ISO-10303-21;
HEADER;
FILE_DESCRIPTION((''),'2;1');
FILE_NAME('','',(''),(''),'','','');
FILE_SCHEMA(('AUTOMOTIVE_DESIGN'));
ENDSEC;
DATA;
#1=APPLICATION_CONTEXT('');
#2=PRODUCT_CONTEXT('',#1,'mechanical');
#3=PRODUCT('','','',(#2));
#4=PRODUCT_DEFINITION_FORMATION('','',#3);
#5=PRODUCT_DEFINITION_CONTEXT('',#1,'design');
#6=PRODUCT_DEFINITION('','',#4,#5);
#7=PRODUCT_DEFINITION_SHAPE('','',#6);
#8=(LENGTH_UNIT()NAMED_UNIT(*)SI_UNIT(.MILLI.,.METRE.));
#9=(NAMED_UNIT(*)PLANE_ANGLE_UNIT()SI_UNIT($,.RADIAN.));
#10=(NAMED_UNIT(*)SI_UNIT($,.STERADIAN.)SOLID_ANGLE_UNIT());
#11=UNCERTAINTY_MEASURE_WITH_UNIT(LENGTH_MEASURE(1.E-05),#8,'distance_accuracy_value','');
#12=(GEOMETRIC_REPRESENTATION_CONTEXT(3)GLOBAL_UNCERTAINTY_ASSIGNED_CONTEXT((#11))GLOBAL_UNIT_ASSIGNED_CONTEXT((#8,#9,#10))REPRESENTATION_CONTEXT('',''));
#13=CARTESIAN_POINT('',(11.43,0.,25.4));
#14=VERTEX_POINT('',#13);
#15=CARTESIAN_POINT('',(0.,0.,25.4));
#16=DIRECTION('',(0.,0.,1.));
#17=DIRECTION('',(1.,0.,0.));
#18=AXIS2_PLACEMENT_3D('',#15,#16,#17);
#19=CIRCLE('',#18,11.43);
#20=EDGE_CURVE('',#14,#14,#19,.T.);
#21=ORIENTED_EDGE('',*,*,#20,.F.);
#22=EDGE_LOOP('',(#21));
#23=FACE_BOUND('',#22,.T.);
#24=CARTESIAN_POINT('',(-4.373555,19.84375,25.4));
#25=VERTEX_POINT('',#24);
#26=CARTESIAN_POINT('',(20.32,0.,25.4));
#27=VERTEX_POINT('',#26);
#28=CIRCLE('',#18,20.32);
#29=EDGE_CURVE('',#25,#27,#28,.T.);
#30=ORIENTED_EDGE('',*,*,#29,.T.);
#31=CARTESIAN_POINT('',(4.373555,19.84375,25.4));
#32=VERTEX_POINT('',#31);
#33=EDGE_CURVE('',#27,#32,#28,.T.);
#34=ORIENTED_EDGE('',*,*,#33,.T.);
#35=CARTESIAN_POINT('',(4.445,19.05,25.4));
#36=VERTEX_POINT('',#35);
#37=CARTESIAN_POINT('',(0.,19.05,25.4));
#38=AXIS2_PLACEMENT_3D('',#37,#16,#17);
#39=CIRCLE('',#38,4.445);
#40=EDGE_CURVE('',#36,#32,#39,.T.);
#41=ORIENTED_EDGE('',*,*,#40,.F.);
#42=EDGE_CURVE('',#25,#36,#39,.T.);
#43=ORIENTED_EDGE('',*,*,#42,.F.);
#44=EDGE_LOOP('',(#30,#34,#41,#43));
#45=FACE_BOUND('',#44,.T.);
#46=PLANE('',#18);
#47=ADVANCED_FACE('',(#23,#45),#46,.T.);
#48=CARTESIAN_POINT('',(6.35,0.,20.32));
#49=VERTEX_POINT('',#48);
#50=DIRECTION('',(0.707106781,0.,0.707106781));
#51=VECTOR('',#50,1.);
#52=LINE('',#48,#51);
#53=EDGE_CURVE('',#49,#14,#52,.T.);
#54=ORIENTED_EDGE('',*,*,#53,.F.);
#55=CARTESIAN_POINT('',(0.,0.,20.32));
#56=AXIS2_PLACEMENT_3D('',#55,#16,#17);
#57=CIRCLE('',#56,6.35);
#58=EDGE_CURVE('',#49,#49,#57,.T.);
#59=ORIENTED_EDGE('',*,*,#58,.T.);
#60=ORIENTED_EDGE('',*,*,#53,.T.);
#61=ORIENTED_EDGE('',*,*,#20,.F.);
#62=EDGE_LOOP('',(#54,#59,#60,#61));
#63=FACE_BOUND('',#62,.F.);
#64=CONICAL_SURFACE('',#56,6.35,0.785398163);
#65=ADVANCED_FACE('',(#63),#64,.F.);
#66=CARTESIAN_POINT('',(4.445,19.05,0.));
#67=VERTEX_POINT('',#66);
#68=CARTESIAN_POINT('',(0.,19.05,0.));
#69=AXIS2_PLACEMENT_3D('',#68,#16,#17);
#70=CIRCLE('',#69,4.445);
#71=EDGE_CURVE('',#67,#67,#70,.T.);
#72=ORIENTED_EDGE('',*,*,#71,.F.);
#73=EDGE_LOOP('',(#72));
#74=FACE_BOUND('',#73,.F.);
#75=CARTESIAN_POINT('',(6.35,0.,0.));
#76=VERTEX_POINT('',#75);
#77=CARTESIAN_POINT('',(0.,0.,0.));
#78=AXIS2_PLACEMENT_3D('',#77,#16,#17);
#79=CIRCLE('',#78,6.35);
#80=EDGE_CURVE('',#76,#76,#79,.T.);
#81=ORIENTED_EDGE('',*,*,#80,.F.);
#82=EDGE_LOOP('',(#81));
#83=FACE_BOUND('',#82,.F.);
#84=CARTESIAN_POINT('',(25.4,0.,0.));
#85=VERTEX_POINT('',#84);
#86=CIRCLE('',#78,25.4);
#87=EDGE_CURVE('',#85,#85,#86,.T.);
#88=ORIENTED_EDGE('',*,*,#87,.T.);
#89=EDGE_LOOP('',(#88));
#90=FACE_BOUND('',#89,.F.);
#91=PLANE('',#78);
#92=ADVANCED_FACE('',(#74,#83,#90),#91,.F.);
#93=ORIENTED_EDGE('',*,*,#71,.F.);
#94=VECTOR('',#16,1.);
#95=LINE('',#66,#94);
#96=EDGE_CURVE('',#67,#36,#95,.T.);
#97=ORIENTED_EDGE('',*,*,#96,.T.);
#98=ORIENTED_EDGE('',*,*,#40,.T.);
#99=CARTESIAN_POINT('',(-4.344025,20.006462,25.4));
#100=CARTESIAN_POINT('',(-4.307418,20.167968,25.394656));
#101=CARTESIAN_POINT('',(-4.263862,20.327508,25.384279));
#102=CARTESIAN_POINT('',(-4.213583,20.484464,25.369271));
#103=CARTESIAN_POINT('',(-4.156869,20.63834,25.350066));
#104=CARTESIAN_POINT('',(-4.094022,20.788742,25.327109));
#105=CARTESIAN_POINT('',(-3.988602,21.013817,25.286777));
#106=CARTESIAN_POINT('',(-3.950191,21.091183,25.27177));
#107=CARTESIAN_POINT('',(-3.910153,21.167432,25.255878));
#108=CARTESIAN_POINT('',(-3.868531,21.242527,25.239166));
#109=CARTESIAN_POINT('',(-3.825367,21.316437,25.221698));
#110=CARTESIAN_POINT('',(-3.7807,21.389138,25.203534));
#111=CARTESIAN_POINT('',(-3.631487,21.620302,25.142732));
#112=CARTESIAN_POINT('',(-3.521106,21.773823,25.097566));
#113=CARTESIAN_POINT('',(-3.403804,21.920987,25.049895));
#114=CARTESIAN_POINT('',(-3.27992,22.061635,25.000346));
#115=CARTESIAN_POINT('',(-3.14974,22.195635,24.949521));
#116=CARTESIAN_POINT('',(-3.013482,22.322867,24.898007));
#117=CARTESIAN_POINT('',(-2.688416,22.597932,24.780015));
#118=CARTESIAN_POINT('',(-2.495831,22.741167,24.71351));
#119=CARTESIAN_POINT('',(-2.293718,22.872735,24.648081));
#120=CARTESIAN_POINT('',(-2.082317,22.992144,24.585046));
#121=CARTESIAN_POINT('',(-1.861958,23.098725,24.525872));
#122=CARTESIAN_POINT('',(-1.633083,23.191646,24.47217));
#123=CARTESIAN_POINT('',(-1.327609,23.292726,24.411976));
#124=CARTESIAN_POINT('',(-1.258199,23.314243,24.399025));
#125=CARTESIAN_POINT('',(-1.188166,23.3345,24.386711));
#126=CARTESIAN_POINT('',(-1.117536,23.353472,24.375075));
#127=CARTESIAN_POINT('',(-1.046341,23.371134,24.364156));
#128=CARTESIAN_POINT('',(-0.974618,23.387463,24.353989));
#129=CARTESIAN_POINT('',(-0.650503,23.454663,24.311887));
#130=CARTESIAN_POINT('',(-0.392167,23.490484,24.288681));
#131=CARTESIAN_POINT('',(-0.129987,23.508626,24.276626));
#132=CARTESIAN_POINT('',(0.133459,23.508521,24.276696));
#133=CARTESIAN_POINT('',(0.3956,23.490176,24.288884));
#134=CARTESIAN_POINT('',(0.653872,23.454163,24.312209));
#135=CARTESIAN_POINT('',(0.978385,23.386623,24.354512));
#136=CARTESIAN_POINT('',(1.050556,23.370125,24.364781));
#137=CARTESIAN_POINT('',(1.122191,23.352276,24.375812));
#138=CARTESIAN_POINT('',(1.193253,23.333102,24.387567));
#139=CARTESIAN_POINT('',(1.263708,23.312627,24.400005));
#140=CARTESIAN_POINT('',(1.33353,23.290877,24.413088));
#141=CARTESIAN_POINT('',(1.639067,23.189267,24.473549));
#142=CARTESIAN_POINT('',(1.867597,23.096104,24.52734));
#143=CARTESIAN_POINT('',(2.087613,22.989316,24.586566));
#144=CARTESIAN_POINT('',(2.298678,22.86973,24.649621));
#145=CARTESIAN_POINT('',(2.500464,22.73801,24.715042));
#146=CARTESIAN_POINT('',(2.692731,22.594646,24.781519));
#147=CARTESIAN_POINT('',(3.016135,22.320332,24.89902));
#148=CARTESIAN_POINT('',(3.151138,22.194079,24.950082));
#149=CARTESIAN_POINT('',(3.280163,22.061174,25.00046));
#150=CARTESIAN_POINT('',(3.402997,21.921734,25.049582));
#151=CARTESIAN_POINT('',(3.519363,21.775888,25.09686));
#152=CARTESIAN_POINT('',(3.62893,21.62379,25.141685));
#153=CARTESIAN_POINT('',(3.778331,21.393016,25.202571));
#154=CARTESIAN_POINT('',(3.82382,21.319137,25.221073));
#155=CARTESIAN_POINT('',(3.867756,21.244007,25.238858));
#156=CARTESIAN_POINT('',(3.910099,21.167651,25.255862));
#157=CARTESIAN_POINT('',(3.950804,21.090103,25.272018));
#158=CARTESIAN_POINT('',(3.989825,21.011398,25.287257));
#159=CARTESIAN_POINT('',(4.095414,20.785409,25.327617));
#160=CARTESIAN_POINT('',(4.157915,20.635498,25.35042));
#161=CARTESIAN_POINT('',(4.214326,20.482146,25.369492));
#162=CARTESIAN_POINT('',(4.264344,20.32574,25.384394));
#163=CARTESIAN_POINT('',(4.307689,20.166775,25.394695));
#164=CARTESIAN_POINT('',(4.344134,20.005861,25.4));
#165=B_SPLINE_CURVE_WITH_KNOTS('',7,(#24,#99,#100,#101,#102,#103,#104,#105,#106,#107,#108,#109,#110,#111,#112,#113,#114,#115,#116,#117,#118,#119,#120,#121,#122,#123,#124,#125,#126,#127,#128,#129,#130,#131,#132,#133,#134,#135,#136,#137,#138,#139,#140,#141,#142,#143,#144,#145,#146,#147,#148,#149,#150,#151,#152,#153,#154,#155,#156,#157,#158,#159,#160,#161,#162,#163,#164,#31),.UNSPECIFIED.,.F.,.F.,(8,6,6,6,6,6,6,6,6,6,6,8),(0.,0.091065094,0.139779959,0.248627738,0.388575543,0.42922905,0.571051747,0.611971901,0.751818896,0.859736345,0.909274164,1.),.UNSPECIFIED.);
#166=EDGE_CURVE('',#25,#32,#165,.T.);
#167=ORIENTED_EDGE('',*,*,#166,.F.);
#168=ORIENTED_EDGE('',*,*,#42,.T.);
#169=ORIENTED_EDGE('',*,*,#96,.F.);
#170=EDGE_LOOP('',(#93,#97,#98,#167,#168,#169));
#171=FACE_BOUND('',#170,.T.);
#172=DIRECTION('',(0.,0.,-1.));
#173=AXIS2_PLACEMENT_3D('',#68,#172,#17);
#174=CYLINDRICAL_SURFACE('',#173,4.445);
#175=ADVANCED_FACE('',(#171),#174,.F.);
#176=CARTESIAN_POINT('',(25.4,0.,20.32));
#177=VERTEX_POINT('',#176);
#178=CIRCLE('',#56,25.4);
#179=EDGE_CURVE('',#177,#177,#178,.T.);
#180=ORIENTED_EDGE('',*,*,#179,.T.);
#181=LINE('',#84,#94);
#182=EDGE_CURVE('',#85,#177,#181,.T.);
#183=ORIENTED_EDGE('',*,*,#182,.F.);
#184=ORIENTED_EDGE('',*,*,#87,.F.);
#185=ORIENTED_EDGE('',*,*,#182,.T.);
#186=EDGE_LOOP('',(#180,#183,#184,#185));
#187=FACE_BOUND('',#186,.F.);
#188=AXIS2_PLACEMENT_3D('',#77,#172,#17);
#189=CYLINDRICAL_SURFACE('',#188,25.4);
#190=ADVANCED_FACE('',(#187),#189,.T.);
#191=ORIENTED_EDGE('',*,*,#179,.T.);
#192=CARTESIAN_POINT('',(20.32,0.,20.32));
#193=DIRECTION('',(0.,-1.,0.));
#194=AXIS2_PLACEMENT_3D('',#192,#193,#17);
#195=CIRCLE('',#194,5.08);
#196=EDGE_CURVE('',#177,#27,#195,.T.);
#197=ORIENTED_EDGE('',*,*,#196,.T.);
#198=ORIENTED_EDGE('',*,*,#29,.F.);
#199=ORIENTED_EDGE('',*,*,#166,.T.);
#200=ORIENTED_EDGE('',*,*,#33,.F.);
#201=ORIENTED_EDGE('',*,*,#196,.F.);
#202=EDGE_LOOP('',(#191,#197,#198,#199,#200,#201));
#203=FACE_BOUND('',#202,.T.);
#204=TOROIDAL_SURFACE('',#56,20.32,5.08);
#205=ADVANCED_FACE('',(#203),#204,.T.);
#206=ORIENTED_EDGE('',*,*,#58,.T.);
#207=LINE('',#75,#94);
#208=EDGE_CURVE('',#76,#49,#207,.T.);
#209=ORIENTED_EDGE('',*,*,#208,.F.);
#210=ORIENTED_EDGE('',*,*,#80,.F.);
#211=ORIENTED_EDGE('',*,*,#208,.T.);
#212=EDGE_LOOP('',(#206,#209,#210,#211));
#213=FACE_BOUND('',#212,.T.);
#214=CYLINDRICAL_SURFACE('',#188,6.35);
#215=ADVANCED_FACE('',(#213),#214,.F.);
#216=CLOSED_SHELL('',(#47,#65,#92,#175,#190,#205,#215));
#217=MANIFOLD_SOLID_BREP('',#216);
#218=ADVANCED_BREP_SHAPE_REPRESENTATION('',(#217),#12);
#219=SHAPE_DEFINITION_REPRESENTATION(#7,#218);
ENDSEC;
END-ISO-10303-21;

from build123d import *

# Parameters (mm, degrees)
F0_R     = 25.4
F0_R_2   = 6.35
F0_R_3   = 4.445
F1_DEPTH = 25.4
F3_SIZE  = 5.08


# Not quite as in the source:
# - a fillet or chamfer that OpenCascade refuses, or shapes differently, is made with other operations: its cross-section is extruded or revolved along the edge and cut away or added


with BuildPart() as f1:
    # F0 (on Top) → F1 (new body)
    with BuildSketch(Plane.XY):
        Circle(F0_R)
        Circle(F0_R_2, mode=Mode.SUBTRACT)
        with Locations((0, 19.05)):
            Circle(F0_R_3, mode=Mode.SUBTRACT)
    extrude(amount=F1_DEPTH)

    # F2: fillet of radius 5.08 on 1 edges, made by hand

    # F2_s1 → F2_t2 (revolve, cut)
    with BuildSketch(Plane.XZ):
        with BuildLine():
            ThreePointArc((25.4, 20.32), (23.9121024484, 23.9121024484), (20.32, 25.4))
            Line((20.32, 25.4), (25.4, 25.4))
            Line((25.4, 25.4), (25.4, 20.32))
        make_face()
    revolve(axis=Axis((0, 0, 25.4), (0, 0, 1)), mode=Mode.SUBTRACT)

    # F3
    f3_edges = [f1.edges().sort_by_distance(p)[0] for p in [
        (-6.35, 0, 25.4),
    ]]
    chamfer(f3_edges, length=F3_SIZE)


solid = f1.part
